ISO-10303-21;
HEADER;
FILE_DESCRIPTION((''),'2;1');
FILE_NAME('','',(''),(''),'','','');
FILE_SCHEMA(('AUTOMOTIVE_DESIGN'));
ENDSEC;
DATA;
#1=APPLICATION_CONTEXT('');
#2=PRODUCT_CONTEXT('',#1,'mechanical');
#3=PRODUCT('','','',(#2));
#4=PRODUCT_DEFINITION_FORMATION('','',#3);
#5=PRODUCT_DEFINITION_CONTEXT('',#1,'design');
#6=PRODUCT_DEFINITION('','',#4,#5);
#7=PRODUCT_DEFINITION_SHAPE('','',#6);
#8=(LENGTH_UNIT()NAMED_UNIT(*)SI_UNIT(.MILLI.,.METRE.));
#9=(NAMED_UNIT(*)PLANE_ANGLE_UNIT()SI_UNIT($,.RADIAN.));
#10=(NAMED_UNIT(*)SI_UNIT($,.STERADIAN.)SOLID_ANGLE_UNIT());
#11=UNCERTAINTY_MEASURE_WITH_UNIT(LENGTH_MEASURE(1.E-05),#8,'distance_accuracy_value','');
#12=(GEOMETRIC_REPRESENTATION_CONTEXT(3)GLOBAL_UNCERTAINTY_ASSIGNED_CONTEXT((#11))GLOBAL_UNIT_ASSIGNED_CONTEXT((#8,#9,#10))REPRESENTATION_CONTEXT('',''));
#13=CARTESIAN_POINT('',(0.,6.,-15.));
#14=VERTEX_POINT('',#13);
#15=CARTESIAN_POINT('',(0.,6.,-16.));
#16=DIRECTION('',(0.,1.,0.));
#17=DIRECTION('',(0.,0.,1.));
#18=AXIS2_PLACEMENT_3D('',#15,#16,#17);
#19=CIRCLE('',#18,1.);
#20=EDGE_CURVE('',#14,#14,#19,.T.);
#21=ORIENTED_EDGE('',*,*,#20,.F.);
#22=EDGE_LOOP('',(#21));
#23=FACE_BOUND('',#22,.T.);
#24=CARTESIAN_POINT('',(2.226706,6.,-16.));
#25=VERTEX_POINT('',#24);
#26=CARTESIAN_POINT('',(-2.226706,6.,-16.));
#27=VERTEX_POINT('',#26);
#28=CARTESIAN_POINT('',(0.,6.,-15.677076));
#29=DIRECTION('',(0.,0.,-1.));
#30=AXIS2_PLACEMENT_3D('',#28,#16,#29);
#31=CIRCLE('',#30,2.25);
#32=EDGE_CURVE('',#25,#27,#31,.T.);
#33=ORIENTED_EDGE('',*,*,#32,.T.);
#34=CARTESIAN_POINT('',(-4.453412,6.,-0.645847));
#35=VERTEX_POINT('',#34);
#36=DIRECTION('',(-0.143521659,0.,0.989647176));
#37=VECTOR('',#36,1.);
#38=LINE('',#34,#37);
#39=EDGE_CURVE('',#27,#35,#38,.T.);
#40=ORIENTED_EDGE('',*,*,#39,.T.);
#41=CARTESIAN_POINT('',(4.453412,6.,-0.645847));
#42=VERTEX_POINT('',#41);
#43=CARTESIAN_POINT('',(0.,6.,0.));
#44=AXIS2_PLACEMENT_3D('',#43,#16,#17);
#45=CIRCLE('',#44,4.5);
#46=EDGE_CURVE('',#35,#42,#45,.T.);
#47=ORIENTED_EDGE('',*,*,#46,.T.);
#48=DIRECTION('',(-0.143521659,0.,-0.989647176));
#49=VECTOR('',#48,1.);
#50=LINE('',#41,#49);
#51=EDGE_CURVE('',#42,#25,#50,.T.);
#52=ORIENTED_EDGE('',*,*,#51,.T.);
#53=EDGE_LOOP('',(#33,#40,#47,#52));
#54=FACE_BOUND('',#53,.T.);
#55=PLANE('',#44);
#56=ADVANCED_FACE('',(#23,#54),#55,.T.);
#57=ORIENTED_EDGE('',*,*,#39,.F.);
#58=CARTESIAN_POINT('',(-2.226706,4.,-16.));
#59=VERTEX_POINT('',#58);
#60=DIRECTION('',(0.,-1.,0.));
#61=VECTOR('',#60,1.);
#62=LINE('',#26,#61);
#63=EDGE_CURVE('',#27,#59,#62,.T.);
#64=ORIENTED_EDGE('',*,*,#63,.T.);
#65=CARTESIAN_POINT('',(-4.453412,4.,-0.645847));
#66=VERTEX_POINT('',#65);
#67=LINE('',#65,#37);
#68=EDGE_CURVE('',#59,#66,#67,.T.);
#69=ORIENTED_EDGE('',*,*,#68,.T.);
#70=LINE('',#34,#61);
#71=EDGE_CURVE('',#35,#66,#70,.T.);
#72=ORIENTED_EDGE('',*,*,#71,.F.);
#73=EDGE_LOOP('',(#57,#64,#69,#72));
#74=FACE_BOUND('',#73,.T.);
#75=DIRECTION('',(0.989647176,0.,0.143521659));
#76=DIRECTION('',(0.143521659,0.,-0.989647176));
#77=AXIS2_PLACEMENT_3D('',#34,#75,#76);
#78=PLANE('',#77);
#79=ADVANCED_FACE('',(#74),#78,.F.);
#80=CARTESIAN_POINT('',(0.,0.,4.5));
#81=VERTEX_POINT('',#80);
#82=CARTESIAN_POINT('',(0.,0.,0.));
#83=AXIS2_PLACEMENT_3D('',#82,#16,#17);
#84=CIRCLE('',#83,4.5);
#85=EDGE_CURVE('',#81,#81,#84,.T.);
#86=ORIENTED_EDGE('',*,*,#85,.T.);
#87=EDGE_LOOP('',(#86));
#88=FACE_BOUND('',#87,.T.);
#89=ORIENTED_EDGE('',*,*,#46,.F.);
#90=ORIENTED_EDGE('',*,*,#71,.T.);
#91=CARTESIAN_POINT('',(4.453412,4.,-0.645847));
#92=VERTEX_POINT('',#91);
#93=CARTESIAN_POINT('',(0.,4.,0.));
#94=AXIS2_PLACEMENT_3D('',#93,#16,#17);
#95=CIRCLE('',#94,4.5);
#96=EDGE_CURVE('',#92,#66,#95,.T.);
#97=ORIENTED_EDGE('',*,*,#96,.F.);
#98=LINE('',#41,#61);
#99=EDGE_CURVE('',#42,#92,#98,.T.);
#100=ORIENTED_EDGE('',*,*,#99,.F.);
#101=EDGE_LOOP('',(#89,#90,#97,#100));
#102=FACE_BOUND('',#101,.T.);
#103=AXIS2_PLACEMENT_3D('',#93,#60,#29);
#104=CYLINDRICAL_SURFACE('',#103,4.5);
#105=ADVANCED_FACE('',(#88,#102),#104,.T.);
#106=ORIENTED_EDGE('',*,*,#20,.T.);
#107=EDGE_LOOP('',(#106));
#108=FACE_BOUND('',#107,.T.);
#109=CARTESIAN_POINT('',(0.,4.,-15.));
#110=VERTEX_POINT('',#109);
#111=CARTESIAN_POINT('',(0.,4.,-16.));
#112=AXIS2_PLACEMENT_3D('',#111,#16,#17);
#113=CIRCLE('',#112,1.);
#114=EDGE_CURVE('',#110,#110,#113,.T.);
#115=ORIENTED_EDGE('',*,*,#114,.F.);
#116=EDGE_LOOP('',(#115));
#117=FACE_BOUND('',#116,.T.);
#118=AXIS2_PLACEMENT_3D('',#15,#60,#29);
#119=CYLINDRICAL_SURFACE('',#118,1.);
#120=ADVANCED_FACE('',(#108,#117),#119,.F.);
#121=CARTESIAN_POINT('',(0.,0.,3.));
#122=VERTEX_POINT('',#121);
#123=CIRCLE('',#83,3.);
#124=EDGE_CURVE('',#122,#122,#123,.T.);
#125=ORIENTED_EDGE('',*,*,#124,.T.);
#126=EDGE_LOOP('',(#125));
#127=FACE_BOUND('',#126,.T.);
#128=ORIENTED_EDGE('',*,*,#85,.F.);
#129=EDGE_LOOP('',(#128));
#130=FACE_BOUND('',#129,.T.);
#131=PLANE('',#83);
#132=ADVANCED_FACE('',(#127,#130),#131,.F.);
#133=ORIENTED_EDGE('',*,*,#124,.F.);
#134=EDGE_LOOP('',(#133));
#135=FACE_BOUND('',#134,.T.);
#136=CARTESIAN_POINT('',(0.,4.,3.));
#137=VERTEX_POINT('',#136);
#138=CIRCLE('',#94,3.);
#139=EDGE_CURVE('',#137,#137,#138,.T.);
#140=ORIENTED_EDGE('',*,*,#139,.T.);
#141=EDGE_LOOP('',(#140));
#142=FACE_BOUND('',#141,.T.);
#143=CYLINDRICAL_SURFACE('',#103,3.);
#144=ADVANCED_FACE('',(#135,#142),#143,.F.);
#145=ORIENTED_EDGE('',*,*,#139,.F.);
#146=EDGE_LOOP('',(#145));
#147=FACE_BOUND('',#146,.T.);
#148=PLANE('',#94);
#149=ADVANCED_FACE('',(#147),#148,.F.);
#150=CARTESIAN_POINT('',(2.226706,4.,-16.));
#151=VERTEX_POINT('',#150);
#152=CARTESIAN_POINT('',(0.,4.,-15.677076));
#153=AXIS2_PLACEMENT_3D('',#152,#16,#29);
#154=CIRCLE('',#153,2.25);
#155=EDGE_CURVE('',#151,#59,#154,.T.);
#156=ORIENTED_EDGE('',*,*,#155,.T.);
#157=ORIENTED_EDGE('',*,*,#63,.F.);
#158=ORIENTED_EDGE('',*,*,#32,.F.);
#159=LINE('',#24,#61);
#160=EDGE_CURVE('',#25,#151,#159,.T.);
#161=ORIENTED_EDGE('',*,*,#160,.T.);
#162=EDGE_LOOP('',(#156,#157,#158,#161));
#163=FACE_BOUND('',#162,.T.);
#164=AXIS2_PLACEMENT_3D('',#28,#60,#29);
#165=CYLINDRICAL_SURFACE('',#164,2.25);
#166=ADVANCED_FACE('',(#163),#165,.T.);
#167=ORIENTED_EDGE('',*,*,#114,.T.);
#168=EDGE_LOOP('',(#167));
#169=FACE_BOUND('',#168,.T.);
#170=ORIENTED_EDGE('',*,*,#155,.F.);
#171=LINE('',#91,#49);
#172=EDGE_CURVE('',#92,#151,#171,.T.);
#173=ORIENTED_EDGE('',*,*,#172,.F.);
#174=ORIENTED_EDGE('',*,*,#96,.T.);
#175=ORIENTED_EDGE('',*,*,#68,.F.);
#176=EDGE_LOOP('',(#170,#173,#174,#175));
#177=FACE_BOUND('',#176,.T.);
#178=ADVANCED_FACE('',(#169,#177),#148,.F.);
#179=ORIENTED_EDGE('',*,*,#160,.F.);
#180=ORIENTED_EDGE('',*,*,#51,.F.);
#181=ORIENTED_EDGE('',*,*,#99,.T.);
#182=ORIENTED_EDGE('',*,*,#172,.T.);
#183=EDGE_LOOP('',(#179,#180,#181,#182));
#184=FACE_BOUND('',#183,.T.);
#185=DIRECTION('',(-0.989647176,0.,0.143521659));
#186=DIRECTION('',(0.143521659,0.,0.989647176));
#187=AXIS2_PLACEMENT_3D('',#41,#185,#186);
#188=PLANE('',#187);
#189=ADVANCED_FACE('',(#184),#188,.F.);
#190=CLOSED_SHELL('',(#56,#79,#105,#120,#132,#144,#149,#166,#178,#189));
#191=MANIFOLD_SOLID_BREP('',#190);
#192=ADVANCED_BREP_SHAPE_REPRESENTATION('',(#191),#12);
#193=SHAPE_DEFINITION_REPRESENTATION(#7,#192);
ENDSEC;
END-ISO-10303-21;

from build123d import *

# Parameters (mm, degrees)
SKETCH1_R           = 4.5
SKETCH1_R_2         = 3
BOSS_EXTRUDE1_DEPTH = 4
SKETCH2_R           = 1
BOSS_EXTRUDE2_DEPTH = 2


with BuildPart() as part:
    # Sketch1 → Boss-Extrude1 (new body)
    with BuildSketch(Plane(origin=(0, 0, 0), x_dir=(1, 0, 0), z_dir=(0, 1, 0))):
        Circle(SKETCH1_R)
        Circle(SKETCH1_R_2, mode=Mode.SUBTRACT)
    extrude(amount=BOSS_EXTRUDE1_DEPTH)

    # Sketch2 → Boss-Extrude2 (add)
    with BuildSketch(Plane(origin=(0, 4, 0), x_dir=(1, 0, 0), z_dir=(0, 1, 0))):
        with BuildLine():
            Line((-4.453412293, 0.645847467), (-2.226706146, 16))
            ThreePointArc((-2.226706146, 16), (0, 17.927076266), (2.226706146, 16))
            Line((2.226706146, 16), (4.453412293, 0.645847467))
            ThreePointArc((4.453412293, 0.645847467), (0, -4.5), (-4.453412293, 0.645847467))
        make_face()
        with Locations((0, 16)):
            Circle(SKETCH2_R, mode=Mode.SUBTRACT)
    extrude(amount=BOSS_EXTRUDE2_DEPTH)


solid = part.part
